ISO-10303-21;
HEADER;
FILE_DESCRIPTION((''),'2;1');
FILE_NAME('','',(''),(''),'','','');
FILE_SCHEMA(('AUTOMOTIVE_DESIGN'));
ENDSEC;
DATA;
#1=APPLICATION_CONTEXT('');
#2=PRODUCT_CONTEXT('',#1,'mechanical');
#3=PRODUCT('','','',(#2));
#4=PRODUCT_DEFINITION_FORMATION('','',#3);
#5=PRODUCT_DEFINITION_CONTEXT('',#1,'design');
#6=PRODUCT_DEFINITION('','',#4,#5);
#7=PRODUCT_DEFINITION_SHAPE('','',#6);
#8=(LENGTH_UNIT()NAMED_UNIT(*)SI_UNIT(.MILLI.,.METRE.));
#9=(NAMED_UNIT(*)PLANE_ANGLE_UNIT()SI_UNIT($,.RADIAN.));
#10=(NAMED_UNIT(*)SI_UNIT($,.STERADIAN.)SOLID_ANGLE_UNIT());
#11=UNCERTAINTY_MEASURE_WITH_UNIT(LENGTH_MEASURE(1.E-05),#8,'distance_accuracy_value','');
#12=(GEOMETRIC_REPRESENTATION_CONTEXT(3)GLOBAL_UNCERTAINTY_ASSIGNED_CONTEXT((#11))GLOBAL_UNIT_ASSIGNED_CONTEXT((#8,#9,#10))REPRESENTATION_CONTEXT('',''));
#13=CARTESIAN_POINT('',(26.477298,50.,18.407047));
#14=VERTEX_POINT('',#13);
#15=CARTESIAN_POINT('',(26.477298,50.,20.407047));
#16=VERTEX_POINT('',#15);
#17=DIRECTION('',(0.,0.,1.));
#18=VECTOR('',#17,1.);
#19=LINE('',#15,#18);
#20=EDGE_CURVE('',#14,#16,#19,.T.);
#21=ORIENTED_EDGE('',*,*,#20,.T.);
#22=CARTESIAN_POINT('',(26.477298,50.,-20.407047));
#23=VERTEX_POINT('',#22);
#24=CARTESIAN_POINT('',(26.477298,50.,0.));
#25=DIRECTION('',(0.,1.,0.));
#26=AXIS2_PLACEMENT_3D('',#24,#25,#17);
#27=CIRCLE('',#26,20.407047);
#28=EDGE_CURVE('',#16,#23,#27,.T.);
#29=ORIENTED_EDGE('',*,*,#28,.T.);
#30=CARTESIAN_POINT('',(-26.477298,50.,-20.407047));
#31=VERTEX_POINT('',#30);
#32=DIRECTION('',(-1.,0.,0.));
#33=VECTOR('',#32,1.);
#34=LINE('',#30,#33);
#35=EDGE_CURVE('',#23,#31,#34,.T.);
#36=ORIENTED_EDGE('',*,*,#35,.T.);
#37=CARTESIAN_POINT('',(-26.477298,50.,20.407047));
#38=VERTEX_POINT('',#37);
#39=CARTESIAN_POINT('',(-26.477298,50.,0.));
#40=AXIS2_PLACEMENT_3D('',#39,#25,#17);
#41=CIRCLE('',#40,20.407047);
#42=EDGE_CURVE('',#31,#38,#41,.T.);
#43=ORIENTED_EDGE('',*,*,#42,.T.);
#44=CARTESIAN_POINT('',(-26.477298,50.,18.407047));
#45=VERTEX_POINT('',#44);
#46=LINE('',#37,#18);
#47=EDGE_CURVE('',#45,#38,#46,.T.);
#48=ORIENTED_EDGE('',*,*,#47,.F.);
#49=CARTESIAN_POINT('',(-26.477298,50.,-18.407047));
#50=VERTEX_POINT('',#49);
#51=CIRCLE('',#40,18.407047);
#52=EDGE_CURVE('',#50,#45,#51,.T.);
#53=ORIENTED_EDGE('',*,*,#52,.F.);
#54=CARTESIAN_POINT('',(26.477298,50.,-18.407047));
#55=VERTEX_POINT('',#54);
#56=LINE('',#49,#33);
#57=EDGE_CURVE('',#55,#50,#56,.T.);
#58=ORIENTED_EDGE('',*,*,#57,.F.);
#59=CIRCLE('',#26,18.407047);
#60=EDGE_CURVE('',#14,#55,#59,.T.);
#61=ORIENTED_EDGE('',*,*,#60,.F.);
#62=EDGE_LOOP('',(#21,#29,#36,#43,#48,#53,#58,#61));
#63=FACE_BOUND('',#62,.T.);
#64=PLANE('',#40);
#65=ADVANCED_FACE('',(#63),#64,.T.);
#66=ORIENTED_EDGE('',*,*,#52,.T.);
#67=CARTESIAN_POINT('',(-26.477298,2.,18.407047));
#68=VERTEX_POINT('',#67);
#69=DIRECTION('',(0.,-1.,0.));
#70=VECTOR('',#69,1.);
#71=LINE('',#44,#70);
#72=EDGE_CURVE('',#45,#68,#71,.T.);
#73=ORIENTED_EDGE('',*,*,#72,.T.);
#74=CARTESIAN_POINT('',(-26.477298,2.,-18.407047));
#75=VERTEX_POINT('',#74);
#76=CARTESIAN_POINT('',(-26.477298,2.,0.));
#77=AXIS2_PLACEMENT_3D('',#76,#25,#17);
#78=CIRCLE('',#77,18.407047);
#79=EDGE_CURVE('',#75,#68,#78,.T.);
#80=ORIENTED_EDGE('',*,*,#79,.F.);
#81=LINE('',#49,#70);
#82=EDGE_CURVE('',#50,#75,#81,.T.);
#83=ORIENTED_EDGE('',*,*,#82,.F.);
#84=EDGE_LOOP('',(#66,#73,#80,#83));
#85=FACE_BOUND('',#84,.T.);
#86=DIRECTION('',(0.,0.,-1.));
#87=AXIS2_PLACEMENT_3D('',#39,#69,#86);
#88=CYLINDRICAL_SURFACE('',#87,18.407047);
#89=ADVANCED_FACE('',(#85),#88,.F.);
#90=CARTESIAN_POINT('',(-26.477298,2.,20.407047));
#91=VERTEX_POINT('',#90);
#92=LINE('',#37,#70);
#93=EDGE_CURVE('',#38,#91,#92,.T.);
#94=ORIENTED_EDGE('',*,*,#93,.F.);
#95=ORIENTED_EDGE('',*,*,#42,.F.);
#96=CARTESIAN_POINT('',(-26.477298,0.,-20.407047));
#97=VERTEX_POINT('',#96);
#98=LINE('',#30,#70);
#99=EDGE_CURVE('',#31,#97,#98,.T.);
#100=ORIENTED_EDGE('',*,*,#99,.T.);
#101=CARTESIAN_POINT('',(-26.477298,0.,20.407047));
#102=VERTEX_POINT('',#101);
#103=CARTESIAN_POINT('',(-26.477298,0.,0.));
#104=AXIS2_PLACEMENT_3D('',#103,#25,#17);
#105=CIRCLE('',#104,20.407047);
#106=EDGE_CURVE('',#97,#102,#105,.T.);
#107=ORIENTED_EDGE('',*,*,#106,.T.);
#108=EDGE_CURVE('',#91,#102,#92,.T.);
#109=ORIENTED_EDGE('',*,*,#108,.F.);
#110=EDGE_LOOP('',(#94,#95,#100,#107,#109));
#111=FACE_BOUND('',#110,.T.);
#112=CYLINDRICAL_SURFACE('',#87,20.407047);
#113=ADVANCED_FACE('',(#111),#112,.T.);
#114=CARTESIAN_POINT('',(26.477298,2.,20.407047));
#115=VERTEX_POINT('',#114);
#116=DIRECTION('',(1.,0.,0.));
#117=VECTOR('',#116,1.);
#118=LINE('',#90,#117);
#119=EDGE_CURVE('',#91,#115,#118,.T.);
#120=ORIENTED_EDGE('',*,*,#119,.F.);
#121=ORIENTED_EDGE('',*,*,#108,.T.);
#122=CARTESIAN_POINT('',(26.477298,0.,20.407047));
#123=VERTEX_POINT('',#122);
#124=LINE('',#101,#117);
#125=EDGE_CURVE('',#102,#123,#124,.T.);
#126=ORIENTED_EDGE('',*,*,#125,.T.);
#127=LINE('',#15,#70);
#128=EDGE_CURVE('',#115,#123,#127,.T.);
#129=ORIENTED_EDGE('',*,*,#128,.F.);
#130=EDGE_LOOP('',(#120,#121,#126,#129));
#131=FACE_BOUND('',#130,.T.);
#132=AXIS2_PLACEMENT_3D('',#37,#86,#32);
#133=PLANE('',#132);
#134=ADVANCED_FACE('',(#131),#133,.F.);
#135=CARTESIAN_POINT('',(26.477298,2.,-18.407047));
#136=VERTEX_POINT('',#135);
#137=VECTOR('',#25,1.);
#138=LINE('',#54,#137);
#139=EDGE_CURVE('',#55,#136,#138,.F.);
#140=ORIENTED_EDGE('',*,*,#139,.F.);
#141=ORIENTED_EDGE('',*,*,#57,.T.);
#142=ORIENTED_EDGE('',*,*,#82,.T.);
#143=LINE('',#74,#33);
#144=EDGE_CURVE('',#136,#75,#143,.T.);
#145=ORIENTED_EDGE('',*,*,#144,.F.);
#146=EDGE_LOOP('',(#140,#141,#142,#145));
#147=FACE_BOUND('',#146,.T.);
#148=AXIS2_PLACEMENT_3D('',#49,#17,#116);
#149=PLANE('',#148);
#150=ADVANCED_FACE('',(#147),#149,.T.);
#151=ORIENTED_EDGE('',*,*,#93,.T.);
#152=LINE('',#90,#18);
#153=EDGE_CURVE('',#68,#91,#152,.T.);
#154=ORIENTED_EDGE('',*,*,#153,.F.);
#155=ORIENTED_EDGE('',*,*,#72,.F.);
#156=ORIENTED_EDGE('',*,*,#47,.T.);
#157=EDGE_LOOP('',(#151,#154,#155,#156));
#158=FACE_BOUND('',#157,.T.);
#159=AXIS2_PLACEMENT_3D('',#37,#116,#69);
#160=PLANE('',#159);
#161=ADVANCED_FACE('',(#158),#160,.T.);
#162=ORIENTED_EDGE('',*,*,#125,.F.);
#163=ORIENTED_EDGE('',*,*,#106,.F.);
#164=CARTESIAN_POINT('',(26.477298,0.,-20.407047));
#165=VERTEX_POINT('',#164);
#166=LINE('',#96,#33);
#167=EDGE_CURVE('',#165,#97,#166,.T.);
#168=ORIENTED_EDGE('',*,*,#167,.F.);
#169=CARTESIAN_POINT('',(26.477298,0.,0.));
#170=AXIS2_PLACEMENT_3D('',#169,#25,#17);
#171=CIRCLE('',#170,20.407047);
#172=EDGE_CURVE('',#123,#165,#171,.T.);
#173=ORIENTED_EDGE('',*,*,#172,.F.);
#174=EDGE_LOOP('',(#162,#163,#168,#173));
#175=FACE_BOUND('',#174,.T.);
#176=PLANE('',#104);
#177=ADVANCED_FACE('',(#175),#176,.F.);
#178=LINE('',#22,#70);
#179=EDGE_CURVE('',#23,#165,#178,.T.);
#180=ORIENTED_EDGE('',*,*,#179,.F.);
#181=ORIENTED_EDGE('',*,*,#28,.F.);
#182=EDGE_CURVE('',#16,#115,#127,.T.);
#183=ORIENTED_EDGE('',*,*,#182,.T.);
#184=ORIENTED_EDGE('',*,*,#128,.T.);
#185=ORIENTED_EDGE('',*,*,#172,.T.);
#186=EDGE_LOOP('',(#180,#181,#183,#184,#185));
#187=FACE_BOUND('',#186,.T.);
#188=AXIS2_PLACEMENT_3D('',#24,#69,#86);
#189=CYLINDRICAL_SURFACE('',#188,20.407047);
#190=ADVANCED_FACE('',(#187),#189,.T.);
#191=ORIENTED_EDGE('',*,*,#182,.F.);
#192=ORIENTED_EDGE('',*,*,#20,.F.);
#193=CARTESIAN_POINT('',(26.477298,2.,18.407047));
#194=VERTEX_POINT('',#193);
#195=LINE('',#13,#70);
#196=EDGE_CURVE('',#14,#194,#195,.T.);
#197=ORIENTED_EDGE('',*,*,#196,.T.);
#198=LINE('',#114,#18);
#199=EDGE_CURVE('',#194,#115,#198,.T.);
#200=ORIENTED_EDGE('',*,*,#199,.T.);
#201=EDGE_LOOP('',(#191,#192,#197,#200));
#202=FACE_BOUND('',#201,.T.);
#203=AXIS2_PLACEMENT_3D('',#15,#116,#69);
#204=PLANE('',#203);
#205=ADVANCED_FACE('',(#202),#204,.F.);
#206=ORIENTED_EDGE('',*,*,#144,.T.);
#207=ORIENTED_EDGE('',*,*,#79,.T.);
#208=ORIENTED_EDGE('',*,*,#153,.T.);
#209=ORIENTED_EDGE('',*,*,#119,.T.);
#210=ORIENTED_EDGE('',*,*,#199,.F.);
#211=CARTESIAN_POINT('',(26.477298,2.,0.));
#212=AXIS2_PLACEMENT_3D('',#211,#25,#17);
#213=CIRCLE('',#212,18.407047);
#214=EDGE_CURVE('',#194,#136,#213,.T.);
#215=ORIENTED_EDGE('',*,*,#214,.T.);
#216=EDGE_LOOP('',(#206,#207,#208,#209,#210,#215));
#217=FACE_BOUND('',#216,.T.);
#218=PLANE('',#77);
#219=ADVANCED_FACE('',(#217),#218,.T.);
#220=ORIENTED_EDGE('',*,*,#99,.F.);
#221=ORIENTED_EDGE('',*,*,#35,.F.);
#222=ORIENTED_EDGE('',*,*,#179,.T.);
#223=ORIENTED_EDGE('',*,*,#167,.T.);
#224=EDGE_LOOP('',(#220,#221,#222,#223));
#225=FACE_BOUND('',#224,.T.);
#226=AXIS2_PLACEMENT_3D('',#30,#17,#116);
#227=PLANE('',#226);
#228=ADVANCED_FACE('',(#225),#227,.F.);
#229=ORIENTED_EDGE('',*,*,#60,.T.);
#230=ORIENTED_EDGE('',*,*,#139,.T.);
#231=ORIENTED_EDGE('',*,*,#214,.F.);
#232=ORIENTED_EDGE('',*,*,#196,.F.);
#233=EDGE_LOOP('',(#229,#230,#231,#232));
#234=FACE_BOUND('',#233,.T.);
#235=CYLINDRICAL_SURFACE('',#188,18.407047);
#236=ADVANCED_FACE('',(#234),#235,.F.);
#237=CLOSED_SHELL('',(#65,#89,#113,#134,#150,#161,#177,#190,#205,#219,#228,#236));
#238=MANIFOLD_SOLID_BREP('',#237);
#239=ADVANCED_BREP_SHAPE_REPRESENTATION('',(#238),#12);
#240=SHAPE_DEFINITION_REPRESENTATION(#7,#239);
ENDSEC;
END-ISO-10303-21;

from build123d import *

# Parameters (mm, degrees)
BOSS_EXTRUDE1_DEPTH = 50
SHELL2_START        = 2
SHELL2_DEPTH        = 48


# Read off the part's stored shape, not the designer's step: Shell2
with BuildPart() as part:
    # Sketch1 → Boss-Extrude1 (new body)
    with BuildSketch(Plane(origin=(0, 0, 0), x_dir=(1, 0, 0), z_dir=(0, 1, 0))):
        with BuildLine():
            Line((-26.477298014, 20.407046949), (26.477298014, 20.407046949))
            ThreePointArc((26.477298014, 20.407046949), (46.884344963, 0), (26.477298014, -20.407046949))
            Line((26.477298014, -20.407046949), (-26.477298014, -20.407046949))
            ThreePointArc((-26.477298014, -20.407046949), (-46.884344963, 0), (-26.477298014, 20.407046949))
        make_face()
    extrude(amount=BOSS_EXTRUDE1_DEPTH)

    # Shell2 outline → Shell2 (cut)
    with BuildSketch(Plane(origin=(0, 0, 0), x_dir=(1, 0, 0), z_dir=(0, 1, 0)).offset(SHELL2_START)):
        with BuildLine():
            Line((-26.477298014, -18.407046949), (-26.477298014, -20.407046949))
            Line((-26.477298014, -20.407046949), (26.477298014, -20.407046949))
            Line((26.477298014, -20.407046949), (26.477298014, -18.407046949))
            ThreePointArc((26.477298014, -18.407046949), (44.884344963, 0), (26.477298014, 18.407046949))
            Line((26.477298014, 18.407046949), (-26.477298014, 18.407046949))
            ThreePointArc((-26.477298014, 18.407046949), (-44.884344963, 0), (-26.477298014, -18.407046949))
        make_face()
    extrude(amount=SHELL2_DEPTH, mode=Mode.SUBTRACT)


solid = part.part
